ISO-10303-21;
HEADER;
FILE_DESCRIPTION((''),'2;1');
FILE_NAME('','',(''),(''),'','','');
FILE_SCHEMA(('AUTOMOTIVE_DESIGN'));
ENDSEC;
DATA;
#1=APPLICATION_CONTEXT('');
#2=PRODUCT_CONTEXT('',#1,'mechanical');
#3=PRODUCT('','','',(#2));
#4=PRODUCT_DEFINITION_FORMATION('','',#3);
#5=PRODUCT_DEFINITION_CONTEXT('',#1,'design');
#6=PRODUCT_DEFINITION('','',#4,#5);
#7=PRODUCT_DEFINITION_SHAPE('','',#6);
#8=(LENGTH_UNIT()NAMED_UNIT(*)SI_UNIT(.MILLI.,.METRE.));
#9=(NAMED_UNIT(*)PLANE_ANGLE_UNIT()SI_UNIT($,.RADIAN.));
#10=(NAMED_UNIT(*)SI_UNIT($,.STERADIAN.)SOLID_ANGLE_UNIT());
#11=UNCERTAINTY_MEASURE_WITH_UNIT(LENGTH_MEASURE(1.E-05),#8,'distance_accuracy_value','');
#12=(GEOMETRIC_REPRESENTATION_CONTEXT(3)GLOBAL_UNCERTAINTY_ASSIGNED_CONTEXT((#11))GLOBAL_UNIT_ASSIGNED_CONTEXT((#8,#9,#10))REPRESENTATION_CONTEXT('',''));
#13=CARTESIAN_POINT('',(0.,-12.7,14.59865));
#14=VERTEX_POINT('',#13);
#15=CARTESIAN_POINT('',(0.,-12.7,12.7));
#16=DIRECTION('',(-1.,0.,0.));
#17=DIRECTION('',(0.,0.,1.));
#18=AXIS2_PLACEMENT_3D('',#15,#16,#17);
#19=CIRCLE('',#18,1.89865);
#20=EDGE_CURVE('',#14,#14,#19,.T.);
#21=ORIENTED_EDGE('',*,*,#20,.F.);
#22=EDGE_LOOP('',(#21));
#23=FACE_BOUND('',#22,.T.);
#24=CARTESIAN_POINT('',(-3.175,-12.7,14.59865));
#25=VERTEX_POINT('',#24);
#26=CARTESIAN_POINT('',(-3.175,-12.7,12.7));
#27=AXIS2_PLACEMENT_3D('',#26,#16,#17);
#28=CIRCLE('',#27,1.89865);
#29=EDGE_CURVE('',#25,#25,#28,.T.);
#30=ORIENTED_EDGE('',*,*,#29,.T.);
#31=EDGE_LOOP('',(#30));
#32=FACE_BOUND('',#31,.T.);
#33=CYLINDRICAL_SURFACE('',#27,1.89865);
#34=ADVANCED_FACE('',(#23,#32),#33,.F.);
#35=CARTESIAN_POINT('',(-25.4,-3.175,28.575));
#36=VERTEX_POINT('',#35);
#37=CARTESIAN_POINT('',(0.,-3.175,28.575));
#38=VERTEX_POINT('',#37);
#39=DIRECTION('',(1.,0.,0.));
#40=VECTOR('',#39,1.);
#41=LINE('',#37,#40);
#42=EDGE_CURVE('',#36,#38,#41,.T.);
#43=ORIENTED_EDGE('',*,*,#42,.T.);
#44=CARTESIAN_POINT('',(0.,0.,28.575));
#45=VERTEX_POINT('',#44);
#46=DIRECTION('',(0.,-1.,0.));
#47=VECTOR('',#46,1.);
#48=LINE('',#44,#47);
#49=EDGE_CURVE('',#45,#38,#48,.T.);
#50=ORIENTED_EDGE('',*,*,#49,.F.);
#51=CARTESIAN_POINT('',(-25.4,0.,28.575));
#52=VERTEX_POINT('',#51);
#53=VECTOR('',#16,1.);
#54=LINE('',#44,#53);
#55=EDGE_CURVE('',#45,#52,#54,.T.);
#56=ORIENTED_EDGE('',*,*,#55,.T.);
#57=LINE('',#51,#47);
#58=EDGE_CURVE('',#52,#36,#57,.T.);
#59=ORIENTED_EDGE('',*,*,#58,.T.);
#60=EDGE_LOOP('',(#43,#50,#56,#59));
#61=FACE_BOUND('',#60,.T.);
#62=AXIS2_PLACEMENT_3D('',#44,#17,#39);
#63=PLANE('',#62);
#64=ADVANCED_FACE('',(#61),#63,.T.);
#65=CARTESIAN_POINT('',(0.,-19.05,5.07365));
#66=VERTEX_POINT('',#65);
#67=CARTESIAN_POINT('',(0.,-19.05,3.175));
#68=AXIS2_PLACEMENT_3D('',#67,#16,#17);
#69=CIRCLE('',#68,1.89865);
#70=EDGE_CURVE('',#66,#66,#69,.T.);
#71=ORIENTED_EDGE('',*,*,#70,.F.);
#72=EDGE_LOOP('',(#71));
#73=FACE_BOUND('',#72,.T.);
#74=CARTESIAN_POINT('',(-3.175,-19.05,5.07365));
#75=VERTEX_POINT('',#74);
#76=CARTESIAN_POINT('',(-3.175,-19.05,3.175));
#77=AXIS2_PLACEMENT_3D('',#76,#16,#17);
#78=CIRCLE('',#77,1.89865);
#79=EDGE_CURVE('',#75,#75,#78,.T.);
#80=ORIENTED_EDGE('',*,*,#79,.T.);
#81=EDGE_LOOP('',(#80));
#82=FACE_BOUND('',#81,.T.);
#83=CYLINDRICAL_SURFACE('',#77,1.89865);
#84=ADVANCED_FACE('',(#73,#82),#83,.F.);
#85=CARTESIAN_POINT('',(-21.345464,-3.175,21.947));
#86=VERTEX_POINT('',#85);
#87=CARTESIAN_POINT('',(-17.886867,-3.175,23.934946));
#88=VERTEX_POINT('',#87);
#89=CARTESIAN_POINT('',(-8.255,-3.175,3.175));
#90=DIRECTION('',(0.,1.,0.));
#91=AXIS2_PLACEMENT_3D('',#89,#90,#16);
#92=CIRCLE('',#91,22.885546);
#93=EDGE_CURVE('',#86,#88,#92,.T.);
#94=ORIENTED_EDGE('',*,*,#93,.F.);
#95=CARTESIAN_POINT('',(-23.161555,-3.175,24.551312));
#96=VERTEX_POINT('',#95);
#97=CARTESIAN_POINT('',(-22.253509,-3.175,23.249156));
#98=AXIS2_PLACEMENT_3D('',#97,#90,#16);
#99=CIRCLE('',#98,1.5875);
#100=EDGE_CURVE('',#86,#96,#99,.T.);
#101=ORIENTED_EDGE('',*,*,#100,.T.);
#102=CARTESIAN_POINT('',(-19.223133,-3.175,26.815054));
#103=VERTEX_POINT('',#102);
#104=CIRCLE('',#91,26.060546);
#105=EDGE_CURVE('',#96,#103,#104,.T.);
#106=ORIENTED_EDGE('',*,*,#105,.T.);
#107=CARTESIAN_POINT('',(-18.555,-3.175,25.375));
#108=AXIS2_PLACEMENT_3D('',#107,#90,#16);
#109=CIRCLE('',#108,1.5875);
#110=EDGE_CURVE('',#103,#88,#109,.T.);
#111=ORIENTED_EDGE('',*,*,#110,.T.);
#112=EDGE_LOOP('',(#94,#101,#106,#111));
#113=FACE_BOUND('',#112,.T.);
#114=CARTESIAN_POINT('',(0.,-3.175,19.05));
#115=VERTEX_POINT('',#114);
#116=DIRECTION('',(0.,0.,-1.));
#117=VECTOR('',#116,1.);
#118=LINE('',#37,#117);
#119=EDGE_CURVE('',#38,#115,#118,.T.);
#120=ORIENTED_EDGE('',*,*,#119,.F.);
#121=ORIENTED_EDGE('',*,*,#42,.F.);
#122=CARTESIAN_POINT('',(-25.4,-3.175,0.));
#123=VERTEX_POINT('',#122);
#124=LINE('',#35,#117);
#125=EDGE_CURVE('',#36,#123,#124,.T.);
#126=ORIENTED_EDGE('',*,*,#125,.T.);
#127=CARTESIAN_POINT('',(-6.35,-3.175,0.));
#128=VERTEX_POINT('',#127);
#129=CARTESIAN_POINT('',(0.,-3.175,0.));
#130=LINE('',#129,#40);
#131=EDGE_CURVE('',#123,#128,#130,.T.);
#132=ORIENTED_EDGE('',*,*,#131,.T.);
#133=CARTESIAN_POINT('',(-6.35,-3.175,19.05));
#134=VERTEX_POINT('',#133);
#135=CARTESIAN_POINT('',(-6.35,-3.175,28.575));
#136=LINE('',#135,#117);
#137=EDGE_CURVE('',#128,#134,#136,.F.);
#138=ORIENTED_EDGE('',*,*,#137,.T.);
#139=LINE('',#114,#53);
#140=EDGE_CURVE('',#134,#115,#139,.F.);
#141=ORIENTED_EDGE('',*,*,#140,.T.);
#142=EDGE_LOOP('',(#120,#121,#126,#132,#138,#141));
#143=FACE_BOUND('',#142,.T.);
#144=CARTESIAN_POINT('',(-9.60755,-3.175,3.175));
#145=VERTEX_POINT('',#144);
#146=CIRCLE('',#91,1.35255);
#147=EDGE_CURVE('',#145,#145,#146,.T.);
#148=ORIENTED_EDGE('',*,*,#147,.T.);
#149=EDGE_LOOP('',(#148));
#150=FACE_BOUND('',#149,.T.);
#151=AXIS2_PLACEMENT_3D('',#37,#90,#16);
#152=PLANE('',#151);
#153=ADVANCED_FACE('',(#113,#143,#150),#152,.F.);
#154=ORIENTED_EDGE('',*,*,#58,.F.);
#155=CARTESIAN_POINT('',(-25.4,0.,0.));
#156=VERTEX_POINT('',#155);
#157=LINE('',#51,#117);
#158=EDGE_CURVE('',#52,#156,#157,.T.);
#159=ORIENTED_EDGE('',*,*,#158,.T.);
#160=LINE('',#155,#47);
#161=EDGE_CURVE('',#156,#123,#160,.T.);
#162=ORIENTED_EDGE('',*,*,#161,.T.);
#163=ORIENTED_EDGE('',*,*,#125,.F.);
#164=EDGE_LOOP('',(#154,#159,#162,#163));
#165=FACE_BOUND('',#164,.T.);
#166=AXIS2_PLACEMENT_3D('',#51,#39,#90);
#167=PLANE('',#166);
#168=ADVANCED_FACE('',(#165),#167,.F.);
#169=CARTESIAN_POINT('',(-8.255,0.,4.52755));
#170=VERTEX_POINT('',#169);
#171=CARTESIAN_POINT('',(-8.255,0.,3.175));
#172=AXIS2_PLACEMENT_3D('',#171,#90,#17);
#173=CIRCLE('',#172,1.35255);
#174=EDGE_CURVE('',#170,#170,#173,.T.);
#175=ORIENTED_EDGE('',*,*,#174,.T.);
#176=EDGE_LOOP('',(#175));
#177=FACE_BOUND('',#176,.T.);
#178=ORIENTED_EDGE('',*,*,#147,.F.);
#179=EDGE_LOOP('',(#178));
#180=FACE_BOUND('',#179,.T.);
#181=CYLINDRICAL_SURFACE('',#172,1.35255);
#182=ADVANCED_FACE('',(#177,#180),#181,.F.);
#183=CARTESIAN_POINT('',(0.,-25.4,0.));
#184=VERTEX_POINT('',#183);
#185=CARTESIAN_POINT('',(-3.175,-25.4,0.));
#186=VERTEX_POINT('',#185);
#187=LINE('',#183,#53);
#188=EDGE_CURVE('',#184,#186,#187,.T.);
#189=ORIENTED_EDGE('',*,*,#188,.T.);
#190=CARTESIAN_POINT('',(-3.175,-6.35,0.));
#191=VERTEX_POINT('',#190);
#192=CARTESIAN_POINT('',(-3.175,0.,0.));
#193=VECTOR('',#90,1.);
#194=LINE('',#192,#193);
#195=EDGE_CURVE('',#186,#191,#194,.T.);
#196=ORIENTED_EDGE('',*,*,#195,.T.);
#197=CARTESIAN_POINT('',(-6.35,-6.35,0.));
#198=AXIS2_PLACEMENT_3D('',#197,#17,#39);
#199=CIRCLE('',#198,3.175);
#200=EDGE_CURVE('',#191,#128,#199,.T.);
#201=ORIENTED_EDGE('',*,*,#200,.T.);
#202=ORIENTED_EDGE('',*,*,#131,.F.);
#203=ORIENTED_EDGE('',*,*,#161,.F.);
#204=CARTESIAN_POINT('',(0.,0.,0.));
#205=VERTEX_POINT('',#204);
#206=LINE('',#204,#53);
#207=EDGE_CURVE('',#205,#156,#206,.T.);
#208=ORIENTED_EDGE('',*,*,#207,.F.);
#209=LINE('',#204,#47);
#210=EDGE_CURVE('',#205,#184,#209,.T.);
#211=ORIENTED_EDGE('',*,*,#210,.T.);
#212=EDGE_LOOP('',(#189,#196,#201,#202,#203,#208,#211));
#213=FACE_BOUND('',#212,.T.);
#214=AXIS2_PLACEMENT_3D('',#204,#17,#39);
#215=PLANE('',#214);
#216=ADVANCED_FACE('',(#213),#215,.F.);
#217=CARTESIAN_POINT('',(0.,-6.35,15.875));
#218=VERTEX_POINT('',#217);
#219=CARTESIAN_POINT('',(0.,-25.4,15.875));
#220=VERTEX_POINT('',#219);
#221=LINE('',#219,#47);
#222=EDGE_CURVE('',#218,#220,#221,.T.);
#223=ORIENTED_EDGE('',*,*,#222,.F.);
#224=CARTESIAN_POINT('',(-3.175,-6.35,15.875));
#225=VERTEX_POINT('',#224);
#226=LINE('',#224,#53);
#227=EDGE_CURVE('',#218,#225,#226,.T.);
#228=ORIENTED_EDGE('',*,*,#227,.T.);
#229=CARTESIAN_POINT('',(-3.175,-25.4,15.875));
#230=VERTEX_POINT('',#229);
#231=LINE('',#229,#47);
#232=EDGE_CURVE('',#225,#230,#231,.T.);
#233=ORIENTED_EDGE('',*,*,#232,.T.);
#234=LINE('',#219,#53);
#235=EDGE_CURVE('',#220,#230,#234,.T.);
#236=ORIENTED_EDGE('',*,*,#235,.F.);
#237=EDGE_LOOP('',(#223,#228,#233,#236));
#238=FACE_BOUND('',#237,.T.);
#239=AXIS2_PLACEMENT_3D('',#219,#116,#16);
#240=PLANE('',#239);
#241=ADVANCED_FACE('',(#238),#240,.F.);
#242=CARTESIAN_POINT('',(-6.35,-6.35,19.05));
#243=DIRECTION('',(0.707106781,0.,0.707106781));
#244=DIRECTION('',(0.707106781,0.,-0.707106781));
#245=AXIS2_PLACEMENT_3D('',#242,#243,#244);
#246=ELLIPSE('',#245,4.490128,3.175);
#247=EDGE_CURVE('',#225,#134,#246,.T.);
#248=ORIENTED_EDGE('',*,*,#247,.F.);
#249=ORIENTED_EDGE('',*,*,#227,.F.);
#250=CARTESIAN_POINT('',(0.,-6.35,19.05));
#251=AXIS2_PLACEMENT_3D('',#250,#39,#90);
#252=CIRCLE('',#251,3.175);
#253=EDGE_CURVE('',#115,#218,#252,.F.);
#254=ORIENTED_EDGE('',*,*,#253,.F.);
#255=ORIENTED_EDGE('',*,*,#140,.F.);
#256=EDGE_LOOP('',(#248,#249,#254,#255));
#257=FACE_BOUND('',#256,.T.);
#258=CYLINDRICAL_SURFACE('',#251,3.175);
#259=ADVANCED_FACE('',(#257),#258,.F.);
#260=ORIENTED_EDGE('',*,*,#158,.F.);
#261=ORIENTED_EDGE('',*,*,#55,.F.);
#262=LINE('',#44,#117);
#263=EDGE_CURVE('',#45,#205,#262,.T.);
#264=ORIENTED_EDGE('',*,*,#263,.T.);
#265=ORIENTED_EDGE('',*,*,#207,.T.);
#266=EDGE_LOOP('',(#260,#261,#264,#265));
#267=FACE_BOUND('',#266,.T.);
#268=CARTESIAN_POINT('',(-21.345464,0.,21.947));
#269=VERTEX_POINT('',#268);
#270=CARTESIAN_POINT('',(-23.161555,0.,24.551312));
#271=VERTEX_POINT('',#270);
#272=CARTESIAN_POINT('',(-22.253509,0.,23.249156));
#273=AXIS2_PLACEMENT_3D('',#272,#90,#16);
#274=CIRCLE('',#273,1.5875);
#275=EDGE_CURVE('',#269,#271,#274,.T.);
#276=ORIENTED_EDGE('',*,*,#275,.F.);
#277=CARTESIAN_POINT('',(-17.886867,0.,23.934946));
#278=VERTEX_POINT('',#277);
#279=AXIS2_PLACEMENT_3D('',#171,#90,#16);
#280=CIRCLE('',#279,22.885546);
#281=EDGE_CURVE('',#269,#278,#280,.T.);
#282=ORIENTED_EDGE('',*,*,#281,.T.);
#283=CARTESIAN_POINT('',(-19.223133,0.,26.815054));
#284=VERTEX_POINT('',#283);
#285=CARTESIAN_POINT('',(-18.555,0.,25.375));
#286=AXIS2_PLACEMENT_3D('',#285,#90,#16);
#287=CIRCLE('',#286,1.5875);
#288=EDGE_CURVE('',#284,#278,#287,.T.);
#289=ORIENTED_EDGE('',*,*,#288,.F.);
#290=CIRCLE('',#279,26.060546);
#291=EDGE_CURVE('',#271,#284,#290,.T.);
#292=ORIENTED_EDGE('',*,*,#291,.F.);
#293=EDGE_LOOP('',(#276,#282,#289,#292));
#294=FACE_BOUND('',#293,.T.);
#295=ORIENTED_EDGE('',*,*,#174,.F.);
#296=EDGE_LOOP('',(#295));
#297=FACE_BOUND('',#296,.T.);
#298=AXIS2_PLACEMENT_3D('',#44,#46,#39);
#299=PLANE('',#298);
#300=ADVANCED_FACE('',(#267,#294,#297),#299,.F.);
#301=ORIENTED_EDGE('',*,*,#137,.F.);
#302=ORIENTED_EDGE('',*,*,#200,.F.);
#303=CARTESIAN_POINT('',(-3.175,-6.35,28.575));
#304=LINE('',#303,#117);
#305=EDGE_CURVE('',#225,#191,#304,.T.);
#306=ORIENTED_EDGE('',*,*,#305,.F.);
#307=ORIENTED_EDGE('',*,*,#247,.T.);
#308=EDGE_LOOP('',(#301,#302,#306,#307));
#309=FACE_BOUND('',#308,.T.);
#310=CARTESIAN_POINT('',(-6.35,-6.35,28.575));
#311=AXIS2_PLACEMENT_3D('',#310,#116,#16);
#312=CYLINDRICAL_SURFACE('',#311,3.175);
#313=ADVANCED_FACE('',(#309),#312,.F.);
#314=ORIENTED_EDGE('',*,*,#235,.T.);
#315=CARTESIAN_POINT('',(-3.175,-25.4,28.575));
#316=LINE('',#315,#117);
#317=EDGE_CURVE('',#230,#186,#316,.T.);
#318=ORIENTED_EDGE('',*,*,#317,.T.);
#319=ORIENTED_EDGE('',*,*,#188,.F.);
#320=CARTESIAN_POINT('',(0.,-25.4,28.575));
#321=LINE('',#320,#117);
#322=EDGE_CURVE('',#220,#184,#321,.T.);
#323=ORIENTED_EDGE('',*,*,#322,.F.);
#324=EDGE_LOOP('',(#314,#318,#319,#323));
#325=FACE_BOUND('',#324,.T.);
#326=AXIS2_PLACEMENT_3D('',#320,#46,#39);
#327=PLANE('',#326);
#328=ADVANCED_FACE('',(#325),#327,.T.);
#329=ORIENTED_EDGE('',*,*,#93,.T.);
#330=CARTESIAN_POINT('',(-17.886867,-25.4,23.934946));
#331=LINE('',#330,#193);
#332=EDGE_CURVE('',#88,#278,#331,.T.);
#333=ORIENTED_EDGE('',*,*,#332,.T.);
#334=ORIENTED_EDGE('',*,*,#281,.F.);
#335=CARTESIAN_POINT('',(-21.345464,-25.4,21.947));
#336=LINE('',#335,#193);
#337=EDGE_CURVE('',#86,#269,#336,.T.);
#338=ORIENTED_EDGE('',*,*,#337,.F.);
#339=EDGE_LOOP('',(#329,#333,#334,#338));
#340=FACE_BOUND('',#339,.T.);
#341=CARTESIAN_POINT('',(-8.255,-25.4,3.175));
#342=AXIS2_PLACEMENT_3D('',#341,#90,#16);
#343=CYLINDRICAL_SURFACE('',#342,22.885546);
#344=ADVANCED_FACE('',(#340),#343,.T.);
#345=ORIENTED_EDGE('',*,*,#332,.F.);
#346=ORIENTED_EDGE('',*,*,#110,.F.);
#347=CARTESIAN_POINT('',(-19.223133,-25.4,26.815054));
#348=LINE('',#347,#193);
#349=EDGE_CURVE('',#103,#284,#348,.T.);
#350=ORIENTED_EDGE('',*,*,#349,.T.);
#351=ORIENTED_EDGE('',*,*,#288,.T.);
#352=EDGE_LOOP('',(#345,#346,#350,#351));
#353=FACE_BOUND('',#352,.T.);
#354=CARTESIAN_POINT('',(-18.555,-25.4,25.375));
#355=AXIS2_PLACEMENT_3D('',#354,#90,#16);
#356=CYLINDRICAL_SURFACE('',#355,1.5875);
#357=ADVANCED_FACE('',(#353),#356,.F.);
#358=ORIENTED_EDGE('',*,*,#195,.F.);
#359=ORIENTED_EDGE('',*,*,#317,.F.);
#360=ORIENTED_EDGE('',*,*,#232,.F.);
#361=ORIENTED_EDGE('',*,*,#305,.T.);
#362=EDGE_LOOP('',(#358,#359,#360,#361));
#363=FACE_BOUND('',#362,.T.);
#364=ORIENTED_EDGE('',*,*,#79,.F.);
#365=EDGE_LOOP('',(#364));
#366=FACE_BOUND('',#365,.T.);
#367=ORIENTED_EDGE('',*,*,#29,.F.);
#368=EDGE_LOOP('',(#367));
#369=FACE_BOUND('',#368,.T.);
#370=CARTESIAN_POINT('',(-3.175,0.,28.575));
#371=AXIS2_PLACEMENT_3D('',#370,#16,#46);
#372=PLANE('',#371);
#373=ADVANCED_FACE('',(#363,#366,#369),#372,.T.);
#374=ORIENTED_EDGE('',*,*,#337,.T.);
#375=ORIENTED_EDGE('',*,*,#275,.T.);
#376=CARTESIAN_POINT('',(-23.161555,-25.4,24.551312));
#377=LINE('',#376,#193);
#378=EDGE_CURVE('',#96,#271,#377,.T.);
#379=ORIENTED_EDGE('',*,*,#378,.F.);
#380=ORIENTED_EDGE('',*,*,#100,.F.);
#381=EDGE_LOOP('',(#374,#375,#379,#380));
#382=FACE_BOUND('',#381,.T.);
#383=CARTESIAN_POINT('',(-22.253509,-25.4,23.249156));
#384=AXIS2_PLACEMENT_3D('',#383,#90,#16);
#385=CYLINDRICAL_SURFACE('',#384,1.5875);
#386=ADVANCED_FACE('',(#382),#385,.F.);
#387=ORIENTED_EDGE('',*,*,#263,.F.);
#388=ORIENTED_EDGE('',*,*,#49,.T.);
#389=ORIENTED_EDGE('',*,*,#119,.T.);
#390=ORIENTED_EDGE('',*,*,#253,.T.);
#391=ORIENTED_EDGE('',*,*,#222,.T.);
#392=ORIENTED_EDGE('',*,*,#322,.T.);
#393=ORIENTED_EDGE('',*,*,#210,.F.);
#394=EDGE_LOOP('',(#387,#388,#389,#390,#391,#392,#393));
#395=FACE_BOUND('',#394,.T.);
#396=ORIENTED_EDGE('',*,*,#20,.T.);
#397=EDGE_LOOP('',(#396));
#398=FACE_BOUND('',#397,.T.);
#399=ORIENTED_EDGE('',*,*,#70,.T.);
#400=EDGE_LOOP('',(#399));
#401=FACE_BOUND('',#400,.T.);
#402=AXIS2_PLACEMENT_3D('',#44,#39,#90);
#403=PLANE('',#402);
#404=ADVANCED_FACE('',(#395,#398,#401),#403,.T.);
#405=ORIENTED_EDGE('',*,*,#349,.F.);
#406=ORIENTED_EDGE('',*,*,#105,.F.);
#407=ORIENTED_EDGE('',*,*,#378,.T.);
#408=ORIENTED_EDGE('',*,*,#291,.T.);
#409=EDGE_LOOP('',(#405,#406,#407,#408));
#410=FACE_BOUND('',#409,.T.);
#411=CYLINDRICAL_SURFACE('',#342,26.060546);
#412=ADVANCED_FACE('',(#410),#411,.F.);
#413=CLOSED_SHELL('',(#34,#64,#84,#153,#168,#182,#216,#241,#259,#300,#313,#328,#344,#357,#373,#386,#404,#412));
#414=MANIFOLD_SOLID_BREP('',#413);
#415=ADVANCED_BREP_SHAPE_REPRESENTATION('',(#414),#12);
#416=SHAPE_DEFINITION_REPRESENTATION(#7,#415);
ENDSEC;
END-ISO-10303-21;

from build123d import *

# Parameters (mm, degrees)
BOSS_EXTRUDE1_DEPTH   = 28.575
F_6_32_TAPPED_HOLE1_D = 2.7051
F_6_CLEARANCE_HOLE1_D = 3.7973
SKETCH8_R             = 1.35255
CUT_EXTRUDE1_DEPTH    = 46.900442536
SKETCH9_W             = 12.7
SKETCH9_H             = 22.225
CUT_EXTRUDE2_DEPTH    = 45.22263278
FILLET1_R             = 3.175


with BuildPart() as part:
    # Sketch1 → Boss-Extrude1 (new body)
    with BuildSketch(Plane.XY):
        Polygon((0, -25.4), (0, 0), (-25.4, 0), (-25.4, -3.175), (-3.175, -3.175), (-3.175, -25.4), align=None)
    extrude(amount=BOSS_EXTRUDE1_DEPTH)

    # #6-32 Tapped Hole1 (through all)
    with Locations(Plane(origin=(-8.255, 0, 3.175), x_dir=(1, 0, 0), z_dir=(0, 1, 0))):
        with Locations((0, 0), (-10.3, -22.2)):
            Hole(F_6_32_TAPPED_HOLE1_D / 2)

    # #6 Clearance Hole1 (through all)
    with Locations(Plane(origin=(-3.175, -12.7, 12.7), x_dir=(0, -1, 0), z_dir=(-1, 0, 0))):
        with Locations((0, 0), (6.35, -9.525)):
            Hole(F_6_CLEARANCE_HOLE1_D / 2)

    # Sketch8 → Cut-Extrude1 (cut, through all)
    with BuildSketch(Plane(origin=(0, 0, 0), x_dir=(1, 0, 0), z_dir=(0, 1, 0))):
        with BuildLine():
            ThreePointArc((-17.886866841, -23.934946413), (-19.659563303, -23.016475999), (-21.345464145, -21.946999958))
            ThreePointArc((-21.345464145, -21.946999958), (-23.555665329, -22.341110631), (-23.161554656, -24.551311816))
            ThreePointArc((-23.161554656, -24.551311816), (-21.241762383, -25.769160338), (-19.223133007, -26.815053657))
            ThreePointArc((-19.223133007, -26.815053657), (-17.114946378, -26.043133083), (-17.886866841, -23.934946413))
        make_face()
        with Locations((-18.555, -25.375)):
            Circle(SKETCH8_R, mode=Mode.SUBTRACT)
    extrude(amount=-CUT_EXTRUDE1_DEPTH, mode=Mode.SUBTRACT)

    # Sketch9 → Cut-Extrude2 (cut, through all)
    with BuildSketch(Plane.ZY.offset(3.175)):
        with Locations((22.225, -14.2875)):
            Rectangle(SKETCH9_W, SKETCH9_H)
    extrude(amount=-CUT_EXTRUDE2_DEPTH, mode=Mode.SUBTRACT)

    # Fillet1
    fillet1_edges = [part.edges().sort_by_distance(p)[0] for p in [
        (-3.175, -3.175, 7.9375),
        (-1.5875, -3.175, 15.875),
    ]]
    fillet(fillet1_edges, radius=FILLET1_R)


solid = part.part
